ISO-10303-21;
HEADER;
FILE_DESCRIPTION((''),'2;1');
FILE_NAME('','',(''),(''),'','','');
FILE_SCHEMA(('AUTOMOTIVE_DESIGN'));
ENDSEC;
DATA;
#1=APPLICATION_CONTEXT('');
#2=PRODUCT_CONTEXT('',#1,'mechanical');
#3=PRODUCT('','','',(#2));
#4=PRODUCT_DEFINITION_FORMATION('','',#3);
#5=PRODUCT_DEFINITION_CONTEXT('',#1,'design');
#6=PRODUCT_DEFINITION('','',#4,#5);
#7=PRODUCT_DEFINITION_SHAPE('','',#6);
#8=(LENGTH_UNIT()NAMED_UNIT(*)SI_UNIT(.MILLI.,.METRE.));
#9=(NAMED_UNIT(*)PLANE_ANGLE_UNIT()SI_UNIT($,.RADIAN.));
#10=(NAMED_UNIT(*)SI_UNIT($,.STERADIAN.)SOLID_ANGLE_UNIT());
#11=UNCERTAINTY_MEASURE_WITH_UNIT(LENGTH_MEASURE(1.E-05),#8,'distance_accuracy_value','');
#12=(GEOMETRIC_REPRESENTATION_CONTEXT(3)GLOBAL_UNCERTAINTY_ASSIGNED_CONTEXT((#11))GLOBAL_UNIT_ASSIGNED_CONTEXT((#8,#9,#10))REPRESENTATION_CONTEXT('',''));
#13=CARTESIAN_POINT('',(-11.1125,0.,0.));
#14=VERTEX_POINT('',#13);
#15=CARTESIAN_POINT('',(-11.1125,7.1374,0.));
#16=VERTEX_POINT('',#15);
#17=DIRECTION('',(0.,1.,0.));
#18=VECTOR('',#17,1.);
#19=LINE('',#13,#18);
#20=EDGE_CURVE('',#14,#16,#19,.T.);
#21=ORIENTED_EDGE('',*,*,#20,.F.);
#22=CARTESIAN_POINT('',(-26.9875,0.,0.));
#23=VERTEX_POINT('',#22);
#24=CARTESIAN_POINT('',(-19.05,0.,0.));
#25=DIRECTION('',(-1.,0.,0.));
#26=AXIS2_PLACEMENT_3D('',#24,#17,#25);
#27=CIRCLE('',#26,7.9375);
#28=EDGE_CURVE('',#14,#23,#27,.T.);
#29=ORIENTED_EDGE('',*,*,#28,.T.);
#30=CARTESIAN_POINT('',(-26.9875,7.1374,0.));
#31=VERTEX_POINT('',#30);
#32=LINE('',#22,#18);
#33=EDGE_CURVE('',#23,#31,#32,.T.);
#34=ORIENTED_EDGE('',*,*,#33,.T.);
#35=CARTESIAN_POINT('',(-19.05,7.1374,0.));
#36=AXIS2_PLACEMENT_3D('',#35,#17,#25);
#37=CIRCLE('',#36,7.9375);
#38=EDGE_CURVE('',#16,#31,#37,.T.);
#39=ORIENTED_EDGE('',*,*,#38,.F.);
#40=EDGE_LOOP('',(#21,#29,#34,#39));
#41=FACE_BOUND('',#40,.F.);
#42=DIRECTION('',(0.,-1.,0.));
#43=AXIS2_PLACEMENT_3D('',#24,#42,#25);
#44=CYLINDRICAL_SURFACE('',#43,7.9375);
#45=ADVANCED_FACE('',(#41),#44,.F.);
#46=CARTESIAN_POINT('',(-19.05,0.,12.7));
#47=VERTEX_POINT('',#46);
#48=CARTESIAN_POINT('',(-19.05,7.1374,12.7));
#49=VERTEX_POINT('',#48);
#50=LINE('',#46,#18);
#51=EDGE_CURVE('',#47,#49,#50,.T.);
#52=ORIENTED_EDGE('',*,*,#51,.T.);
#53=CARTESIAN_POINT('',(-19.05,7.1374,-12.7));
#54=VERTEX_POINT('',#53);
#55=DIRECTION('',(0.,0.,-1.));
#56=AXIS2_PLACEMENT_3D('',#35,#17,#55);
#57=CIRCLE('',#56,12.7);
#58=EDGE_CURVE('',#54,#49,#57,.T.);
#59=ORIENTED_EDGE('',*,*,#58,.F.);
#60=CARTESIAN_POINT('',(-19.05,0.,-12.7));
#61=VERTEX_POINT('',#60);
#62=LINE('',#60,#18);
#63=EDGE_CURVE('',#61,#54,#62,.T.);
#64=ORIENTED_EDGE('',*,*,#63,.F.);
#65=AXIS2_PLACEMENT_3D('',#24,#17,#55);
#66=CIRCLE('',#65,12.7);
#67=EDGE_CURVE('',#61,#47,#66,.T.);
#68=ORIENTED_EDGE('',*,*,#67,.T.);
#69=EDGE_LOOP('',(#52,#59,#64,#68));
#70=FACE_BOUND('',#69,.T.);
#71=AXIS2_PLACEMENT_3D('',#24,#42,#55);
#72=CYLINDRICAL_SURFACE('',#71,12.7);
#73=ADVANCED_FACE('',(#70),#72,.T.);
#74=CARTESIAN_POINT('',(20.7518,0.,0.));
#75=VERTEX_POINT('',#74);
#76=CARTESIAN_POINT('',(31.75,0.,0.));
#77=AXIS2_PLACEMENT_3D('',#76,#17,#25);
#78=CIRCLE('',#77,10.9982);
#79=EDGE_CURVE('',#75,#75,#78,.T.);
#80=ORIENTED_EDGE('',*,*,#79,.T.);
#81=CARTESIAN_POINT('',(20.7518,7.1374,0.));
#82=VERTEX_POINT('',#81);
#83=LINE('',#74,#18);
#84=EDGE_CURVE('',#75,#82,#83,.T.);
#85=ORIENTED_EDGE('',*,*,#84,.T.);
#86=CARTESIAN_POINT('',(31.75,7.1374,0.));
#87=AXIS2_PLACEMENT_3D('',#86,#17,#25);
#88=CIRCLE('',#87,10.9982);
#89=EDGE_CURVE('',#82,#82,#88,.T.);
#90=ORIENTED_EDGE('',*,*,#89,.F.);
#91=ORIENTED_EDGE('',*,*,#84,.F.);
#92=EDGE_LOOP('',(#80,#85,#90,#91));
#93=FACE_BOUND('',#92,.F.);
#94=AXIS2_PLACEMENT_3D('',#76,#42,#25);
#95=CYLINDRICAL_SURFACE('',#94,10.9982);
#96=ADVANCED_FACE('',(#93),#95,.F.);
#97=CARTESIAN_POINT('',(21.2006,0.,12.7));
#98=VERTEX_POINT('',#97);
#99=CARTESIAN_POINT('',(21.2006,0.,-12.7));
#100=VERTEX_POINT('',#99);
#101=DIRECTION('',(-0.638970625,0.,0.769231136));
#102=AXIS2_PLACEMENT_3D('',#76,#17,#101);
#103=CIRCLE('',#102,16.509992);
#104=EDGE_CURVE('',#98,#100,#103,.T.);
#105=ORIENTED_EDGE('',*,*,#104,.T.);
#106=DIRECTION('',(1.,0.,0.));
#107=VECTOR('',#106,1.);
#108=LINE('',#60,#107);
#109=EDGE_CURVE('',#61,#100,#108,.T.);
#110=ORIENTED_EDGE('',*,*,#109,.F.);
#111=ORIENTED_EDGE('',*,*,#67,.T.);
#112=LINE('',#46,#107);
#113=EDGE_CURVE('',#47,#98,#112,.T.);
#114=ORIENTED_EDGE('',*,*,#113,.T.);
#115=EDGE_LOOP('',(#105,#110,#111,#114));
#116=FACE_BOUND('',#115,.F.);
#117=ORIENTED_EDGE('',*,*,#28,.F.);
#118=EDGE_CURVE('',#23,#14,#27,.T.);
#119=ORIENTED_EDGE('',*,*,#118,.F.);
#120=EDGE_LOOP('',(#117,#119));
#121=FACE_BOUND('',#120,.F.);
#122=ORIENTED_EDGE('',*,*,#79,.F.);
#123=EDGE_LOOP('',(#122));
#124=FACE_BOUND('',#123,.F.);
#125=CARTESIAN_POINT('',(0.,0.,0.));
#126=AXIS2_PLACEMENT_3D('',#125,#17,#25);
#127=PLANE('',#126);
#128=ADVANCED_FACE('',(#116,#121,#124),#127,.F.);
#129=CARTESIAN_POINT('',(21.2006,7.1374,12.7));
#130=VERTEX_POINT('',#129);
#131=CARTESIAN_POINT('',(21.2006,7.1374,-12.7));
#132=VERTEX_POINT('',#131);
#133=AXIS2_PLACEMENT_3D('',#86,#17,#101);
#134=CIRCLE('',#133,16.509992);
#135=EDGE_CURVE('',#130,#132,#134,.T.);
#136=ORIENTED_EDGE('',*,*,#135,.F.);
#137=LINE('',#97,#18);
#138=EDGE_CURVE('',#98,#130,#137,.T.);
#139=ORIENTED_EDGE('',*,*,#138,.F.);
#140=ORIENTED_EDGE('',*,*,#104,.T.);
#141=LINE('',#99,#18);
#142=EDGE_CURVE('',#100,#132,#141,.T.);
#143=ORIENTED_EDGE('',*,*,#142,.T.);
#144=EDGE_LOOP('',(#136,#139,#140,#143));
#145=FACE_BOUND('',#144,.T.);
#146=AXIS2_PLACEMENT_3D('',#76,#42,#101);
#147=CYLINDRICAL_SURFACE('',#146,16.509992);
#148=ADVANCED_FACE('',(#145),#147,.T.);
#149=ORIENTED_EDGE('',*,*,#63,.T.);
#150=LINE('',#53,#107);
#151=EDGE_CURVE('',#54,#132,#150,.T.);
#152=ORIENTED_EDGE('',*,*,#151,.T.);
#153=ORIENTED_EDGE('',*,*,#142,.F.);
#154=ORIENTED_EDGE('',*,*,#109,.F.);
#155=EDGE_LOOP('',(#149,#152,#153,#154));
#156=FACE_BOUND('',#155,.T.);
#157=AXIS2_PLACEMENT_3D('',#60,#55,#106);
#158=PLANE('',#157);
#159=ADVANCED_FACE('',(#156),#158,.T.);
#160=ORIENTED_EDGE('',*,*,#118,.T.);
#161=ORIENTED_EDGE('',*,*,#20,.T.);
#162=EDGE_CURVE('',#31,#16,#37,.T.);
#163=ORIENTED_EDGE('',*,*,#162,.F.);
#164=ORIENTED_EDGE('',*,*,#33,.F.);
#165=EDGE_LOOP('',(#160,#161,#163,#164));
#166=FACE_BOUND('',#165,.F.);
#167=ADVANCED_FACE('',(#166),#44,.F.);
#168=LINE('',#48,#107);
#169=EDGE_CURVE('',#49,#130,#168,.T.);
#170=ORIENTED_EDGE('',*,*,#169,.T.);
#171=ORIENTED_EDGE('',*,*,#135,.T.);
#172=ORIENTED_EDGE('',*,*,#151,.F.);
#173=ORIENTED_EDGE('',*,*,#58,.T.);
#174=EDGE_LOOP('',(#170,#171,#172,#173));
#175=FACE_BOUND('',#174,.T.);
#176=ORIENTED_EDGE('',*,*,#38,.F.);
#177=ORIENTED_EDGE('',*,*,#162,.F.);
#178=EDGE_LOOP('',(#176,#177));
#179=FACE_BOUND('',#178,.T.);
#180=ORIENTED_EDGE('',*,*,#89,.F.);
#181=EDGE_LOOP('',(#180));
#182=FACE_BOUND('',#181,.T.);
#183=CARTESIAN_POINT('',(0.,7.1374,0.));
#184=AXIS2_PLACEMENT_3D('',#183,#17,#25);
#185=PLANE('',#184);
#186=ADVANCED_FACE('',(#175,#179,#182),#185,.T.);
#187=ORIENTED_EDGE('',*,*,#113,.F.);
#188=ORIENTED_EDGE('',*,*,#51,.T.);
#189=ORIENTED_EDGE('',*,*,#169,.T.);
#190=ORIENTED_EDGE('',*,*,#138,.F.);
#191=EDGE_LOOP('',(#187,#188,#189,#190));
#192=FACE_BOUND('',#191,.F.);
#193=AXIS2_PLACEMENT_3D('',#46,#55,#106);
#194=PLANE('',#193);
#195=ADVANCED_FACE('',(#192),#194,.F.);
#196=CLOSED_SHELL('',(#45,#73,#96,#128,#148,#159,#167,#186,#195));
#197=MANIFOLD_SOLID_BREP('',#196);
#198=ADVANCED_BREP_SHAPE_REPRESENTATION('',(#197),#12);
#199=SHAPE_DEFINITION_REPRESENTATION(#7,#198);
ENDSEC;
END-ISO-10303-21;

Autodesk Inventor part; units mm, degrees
ref_plane "YZ Plane" through (0, 0, 0) normal (1, 0, 0) x (0, 1, 0)
ref_plane "XZ Plane" through (0, 0, 0) normal (0, 1, 0) x (-1, 0, 0)
ref_plane "XY Plane" through (0, 0, 0) normal (0, 0, 1) x (1, 0, 0)
sketch "Sketch1" plane through (0, 0, 0) normal (0, 1, 0) x (-1, 0, 0)
  arc A0 (19.05, -12.7) -> (19.05, 12.7) centre (19.05, 0) ccw
  arc A1 (-21.2006, 12.7) -> (-21.2006, -12.7) centre (-31.75, 0) ccw
  circle A2 centre (-31.75, 0) radius 10.9982
  circle A3 centre (19.05, 0) radius 7.9375
  line L0 (19.05, -12.7) -> (-24.3756, -12.7)
  line L1 (19.05, 12.7) -> (-24.3756, 12.7)
  line L2 (-31.75, 0) -> (19.05, 0)
  point P0 (0, 0)
  point P1 (-21.2006, 12.7)
  dimension "d4" = 15.875
  dimension "d9" = 50.8
extrude "Extrusion1" add sketch "Sketch1" along normal blind 7.1374
properties part number "Connecting Rod"
